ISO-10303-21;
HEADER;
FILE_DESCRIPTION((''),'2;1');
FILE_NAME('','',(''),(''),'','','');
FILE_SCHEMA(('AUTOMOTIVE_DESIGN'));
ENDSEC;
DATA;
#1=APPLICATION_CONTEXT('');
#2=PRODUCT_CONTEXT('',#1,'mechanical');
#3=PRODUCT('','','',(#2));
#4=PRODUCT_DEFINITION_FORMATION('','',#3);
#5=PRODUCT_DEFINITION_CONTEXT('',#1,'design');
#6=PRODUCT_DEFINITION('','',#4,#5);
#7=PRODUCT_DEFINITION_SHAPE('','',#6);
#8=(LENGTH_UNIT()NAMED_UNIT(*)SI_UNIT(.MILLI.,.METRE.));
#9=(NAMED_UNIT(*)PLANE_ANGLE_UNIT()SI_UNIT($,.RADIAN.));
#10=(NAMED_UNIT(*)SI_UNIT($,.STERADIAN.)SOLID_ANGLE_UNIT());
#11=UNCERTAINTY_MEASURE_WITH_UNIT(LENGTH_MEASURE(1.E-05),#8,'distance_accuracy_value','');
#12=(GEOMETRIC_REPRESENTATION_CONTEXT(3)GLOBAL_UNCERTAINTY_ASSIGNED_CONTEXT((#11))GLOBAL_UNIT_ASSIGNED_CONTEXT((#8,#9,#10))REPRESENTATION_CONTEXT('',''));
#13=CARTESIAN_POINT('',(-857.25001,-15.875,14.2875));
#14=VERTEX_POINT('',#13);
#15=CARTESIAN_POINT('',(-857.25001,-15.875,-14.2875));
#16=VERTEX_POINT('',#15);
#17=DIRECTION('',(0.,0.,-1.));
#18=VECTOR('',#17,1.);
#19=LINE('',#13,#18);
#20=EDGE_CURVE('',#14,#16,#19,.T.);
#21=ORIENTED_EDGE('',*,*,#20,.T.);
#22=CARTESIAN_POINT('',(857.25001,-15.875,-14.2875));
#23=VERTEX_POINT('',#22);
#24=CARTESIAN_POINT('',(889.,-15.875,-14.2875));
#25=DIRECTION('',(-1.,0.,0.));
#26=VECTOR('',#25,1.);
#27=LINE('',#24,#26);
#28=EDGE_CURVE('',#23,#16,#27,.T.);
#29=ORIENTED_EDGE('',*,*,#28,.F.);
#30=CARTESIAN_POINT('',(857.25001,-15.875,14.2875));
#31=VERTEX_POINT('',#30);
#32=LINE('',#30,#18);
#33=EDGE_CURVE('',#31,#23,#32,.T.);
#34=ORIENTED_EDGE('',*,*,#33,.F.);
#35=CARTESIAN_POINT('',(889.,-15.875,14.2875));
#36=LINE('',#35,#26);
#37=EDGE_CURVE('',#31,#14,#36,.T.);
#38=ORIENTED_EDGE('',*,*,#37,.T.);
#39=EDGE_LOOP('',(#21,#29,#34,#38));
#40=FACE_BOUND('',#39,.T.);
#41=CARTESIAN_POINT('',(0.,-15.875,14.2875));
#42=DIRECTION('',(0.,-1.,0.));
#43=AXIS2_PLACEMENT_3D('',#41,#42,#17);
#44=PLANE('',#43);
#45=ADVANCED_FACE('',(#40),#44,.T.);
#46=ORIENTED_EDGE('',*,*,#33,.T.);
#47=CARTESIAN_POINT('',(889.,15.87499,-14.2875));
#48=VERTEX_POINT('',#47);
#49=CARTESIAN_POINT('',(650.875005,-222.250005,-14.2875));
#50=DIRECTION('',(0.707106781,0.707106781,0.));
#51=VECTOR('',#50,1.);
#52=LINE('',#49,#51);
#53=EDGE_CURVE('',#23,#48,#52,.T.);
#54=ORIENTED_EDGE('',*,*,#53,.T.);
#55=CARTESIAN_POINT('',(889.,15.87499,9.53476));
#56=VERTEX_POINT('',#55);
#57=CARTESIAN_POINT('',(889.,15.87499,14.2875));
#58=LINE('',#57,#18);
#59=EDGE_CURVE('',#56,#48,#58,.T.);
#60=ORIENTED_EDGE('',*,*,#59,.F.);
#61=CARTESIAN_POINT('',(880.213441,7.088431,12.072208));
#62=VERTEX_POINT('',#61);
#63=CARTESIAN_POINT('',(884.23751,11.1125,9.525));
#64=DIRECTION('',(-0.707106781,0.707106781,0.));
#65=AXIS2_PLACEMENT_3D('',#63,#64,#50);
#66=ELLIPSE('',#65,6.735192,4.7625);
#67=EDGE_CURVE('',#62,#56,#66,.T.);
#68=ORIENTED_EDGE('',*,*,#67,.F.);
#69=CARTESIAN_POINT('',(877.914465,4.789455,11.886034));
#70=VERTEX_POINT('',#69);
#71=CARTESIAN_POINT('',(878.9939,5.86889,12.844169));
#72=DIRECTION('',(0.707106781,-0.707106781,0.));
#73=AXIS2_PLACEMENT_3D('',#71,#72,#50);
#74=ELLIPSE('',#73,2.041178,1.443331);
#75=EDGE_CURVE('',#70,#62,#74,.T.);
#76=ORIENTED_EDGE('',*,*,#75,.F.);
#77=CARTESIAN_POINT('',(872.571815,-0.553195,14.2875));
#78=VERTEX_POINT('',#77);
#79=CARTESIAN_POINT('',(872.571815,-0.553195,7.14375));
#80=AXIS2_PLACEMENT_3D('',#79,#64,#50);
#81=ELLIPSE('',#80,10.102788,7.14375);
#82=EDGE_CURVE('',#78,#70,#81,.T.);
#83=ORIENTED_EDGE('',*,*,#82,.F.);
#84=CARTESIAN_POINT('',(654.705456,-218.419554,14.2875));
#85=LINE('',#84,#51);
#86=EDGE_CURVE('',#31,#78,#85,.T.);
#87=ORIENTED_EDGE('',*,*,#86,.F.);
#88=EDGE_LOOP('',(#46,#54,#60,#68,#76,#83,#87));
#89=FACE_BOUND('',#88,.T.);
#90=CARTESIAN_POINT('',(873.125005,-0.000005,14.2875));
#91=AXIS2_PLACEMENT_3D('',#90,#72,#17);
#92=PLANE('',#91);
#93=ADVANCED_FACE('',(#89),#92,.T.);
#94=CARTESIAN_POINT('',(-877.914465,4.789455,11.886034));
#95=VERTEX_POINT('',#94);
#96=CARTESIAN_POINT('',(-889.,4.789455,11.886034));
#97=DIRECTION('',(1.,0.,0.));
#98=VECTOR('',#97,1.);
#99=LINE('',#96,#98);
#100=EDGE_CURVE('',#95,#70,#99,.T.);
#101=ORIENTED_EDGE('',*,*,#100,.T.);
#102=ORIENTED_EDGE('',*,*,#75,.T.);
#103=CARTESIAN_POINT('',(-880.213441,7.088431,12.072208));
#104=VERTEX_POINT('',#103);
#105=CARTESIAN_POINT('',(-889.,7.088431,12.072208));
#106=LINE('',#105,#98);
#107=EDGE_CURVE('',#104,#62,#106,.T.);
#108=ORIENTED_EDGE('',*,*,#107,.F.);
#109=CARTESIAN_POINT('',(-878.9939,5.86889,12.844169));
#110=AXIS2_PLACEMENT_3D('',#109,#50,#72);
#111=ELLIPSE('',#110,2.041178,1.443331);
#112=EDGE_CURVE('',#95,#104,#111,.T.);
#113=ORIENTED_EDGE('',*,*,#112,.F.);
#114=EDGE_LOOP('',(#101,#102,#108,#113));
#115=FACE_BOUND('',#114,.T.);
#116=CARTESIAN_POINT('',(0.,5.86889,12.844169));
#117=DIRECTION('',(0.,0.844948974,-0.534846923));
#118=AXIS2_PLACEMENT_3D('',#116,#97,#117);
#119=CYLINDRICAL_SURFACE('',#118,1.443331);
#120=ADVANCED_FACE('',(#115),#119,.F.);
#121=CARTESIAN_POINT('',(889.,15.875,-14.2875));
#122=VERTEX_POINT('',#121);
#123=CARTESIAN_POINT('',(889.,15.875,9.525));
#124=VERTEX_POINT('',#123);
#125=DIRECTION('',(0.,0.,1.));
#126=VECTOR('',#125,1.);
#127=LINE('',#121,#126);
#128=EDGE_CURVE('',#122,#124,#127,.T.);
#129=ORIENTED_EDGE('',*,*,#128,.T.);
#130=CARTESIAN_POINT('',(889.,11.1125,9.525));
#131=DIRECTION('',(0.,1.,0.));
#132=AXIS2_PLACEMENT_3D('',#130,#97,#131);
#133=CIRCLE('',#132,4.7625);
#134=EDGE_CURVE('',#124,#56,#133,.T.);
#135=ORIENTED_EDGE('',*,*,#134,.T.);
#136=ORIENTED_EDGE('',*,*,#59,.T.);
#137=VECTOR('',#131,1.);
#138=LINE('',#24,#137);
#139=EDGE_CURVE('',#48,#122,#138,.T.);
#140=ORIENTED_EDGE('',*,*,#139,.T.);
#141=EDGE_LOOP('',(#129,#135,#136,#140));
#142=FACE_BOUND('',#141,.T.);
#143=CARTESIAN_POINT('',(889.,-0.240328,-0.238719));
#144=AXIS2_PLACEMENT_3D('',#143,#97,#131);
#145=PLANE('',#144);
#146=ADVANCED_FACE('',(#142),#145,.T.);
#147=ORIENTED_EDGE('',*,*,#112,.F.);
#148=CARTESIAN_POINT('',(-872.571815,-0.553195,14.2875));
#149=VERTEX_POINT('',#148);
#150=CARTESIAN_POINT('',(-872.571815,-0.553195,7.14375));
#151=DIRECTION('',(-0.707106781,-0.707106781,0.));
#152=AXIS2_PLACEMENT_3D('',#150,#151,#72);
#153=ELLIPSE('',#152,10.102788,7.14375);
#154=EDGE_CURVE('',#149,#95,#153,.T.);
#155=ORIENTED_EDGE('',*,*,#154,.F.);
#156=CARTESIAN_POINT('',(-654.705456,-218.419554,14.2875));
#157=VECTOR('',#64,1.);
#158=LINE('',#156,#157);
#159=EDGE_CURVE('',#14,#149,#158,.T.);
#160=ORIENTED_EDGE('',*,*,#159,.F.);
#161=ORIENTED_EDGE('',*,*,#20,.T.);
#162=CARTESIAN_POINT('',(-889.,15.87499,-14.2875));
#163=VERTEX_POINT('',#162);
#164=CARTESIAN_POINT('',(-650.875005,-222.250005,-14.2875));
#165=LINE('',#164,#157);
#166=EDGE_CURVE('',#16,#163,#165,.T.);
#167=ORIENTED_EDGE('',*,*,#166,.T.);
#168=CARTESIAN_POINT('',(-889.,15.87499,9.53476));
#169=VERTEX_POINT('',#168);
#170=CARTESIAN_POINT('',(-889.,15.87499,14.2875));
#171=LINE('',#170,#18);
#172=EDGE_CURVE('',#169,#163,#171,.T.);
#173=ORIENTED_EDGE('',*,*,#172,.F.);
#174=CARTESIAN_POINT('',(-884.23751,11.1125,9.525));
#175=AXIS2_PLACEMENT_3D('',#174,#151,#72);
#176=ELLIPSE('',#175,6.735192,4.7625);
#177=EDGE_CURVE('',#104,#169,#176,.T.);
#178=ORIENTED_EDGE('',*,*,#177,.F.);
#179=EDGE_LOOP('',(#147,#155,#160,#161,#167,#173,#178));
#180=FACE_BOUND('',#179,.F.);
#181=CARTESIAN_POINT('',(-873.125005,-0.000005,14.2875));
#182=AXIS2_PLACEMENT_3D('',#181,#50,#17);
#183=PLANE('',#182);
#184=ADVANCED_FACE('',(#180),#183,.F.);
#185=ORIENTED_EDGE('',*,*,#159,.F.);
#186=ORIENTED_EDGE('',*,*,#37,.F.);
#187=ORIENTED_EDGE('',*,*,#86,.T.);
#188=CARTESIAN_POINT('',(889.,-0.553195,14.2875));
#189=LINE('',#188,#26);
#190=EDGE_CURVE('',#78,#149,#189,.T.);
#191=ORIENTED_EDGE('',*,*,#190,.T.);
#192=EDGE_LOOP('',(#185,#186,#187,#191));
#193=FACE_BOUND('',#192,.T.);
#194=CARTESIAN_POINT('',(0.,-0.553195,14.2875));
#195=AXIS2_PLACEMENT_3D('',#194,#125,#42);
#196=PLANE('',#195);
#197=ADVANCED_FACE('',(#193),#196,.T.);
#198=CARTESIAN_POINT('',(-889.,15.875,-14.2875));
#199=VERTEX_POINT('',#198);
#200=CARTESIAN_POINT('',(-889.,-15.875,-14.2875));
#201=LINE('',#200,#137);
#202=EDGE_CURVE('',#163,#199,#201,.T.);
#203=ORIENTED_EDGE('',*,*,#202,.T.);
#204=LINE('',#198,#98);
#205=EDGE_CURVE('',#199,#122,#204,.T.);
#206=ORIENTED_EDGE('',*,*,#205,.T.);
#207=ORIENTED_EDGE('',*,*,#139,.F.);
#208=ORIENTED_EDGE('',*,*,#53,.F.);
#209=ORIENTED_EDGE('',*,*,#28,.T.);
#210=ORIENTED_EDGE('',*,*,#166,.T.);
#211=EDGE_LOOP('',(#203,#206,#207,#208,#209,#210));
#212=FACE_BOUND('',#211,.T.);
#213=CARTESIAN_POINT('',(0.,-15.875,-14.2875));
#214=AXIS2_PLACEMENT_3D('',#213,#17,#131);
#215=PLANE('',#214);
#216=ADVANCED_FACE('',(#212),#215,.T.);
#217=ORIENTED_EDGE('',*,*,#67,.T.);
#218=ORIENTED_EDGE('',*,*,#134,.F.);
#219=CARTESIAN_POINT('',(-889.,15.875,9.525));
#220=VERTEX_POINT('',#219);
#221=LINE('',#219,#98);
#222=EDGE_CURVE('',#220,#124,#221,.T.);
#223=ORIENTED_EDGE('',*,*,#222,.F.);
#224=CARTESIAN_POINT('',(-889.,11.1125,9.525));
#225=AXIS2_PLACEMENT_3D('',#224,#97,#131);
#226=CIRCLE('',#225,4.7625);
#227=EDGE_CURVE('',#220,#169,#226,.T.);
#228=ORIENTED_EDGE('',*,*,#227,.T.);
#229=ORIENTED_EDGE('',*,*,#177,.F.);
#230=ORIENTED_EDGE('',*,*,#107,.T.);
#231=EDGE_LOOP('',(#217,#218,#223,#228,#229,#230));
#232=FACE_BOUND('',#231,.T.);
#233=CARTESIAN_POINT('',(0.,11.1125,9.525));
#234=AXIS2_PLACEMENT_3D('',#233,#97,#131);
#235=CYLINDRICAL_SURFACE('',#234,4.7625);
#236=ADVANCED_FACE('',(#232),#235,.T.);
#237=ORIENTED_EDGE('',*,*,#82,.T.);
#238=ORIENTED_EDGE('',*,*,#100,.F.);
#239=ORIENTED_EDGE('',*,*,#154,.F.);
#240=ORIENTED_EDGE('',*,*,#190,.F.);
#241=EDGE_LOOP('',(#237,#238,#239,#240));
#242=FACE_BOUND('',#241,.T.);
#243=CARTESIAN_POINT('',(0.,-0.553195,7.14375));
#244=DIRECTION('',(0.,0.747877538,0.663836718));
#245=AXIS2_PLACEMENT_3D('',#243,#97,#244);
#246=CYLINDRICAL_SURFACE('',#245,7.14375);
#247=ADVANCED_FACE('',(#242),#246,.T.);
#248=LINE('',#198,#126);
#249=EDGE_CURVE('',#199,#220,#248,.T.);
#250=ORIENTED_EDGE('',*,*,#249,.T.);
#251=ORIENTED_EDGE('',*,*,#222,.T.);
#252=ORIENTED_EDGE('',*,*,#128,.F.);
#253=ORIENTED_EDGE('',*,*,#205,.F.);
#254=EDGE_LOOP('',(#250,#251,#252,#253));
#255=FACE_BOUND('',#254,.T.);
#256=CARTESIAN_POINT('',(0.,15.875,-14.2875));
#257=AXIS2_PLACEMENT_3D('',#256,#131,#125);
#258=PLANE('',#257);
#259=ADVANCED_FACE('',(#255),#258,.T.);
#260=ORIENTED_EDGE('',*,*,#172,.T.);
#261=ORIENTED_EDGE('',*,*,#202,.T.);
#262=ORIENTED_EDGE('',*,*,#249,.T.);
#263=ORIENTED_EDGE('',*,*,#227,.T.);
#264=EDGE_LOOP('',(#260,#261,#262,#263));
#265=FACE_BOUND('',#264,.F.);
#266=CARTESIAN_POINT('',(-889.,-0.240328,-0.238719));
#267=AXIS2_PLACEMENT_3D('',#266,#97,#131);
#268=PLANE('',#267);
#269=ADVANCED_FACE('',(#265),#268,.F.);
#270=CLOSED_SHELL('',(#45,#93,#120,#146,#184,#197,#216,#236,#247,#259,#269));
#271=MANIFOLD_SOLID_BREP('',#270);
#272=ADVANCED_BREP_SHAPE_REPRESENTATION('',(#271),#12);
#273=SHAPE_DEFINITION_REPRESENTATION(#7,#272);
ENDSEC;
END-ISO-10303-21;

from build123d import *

# Parameters (mm, degrees)
F1_DEPTH = 889
F2_SIZE  = 31.74999


# Not quite as in the source:
# - a fillet or chamfer is up to 0.001 mm smaller than in the source, because OpenCascade refuses the exact size


with BuildPart() as f1:
    # F0 (on Right) → F1 (new body, symmetric)
    with BuildSketch(Plane.YZ):
        with BuildLine():
            Line((-15.875, -14.2875), (15.875, -14.2875))
            Line((15.875, -14.2875), (15.875, 9.525))
            ThreePointArc((15.875, 9.525), (12.4385421004, 14.0991686237), (7.08843051, 12.07220847))
            ThreePointArc((7.08843051, 12.07220847), (5.9853917743, 11.4055483551), (4.789455264, 11.886033552))
            ThreePointArc((4.789455264, 11.886033552), (2.3755826554, 13.6595328458), (-0.5531949, 14.2875))
            Line((-0.5531949, 14.2875), (-15.875, 14.2875))
            Line((-15.875, 14.2875), (-15.875, -14.2875))
        make_face()
    extrude(amount=F1_DEPTH, both=True)

    # F2 (size 31.75 in the source; OpenCascade refuses exactly that, so slightly less here)
    f2_edges = [f1.edges().sort_by_distance(p)[0] for p in [
        (-889, -15.875, 0),
        (889, -15.875, 0),
    ]]
    chamfer(f2_edges, length=F2_SIZE)


solid = f1.part
